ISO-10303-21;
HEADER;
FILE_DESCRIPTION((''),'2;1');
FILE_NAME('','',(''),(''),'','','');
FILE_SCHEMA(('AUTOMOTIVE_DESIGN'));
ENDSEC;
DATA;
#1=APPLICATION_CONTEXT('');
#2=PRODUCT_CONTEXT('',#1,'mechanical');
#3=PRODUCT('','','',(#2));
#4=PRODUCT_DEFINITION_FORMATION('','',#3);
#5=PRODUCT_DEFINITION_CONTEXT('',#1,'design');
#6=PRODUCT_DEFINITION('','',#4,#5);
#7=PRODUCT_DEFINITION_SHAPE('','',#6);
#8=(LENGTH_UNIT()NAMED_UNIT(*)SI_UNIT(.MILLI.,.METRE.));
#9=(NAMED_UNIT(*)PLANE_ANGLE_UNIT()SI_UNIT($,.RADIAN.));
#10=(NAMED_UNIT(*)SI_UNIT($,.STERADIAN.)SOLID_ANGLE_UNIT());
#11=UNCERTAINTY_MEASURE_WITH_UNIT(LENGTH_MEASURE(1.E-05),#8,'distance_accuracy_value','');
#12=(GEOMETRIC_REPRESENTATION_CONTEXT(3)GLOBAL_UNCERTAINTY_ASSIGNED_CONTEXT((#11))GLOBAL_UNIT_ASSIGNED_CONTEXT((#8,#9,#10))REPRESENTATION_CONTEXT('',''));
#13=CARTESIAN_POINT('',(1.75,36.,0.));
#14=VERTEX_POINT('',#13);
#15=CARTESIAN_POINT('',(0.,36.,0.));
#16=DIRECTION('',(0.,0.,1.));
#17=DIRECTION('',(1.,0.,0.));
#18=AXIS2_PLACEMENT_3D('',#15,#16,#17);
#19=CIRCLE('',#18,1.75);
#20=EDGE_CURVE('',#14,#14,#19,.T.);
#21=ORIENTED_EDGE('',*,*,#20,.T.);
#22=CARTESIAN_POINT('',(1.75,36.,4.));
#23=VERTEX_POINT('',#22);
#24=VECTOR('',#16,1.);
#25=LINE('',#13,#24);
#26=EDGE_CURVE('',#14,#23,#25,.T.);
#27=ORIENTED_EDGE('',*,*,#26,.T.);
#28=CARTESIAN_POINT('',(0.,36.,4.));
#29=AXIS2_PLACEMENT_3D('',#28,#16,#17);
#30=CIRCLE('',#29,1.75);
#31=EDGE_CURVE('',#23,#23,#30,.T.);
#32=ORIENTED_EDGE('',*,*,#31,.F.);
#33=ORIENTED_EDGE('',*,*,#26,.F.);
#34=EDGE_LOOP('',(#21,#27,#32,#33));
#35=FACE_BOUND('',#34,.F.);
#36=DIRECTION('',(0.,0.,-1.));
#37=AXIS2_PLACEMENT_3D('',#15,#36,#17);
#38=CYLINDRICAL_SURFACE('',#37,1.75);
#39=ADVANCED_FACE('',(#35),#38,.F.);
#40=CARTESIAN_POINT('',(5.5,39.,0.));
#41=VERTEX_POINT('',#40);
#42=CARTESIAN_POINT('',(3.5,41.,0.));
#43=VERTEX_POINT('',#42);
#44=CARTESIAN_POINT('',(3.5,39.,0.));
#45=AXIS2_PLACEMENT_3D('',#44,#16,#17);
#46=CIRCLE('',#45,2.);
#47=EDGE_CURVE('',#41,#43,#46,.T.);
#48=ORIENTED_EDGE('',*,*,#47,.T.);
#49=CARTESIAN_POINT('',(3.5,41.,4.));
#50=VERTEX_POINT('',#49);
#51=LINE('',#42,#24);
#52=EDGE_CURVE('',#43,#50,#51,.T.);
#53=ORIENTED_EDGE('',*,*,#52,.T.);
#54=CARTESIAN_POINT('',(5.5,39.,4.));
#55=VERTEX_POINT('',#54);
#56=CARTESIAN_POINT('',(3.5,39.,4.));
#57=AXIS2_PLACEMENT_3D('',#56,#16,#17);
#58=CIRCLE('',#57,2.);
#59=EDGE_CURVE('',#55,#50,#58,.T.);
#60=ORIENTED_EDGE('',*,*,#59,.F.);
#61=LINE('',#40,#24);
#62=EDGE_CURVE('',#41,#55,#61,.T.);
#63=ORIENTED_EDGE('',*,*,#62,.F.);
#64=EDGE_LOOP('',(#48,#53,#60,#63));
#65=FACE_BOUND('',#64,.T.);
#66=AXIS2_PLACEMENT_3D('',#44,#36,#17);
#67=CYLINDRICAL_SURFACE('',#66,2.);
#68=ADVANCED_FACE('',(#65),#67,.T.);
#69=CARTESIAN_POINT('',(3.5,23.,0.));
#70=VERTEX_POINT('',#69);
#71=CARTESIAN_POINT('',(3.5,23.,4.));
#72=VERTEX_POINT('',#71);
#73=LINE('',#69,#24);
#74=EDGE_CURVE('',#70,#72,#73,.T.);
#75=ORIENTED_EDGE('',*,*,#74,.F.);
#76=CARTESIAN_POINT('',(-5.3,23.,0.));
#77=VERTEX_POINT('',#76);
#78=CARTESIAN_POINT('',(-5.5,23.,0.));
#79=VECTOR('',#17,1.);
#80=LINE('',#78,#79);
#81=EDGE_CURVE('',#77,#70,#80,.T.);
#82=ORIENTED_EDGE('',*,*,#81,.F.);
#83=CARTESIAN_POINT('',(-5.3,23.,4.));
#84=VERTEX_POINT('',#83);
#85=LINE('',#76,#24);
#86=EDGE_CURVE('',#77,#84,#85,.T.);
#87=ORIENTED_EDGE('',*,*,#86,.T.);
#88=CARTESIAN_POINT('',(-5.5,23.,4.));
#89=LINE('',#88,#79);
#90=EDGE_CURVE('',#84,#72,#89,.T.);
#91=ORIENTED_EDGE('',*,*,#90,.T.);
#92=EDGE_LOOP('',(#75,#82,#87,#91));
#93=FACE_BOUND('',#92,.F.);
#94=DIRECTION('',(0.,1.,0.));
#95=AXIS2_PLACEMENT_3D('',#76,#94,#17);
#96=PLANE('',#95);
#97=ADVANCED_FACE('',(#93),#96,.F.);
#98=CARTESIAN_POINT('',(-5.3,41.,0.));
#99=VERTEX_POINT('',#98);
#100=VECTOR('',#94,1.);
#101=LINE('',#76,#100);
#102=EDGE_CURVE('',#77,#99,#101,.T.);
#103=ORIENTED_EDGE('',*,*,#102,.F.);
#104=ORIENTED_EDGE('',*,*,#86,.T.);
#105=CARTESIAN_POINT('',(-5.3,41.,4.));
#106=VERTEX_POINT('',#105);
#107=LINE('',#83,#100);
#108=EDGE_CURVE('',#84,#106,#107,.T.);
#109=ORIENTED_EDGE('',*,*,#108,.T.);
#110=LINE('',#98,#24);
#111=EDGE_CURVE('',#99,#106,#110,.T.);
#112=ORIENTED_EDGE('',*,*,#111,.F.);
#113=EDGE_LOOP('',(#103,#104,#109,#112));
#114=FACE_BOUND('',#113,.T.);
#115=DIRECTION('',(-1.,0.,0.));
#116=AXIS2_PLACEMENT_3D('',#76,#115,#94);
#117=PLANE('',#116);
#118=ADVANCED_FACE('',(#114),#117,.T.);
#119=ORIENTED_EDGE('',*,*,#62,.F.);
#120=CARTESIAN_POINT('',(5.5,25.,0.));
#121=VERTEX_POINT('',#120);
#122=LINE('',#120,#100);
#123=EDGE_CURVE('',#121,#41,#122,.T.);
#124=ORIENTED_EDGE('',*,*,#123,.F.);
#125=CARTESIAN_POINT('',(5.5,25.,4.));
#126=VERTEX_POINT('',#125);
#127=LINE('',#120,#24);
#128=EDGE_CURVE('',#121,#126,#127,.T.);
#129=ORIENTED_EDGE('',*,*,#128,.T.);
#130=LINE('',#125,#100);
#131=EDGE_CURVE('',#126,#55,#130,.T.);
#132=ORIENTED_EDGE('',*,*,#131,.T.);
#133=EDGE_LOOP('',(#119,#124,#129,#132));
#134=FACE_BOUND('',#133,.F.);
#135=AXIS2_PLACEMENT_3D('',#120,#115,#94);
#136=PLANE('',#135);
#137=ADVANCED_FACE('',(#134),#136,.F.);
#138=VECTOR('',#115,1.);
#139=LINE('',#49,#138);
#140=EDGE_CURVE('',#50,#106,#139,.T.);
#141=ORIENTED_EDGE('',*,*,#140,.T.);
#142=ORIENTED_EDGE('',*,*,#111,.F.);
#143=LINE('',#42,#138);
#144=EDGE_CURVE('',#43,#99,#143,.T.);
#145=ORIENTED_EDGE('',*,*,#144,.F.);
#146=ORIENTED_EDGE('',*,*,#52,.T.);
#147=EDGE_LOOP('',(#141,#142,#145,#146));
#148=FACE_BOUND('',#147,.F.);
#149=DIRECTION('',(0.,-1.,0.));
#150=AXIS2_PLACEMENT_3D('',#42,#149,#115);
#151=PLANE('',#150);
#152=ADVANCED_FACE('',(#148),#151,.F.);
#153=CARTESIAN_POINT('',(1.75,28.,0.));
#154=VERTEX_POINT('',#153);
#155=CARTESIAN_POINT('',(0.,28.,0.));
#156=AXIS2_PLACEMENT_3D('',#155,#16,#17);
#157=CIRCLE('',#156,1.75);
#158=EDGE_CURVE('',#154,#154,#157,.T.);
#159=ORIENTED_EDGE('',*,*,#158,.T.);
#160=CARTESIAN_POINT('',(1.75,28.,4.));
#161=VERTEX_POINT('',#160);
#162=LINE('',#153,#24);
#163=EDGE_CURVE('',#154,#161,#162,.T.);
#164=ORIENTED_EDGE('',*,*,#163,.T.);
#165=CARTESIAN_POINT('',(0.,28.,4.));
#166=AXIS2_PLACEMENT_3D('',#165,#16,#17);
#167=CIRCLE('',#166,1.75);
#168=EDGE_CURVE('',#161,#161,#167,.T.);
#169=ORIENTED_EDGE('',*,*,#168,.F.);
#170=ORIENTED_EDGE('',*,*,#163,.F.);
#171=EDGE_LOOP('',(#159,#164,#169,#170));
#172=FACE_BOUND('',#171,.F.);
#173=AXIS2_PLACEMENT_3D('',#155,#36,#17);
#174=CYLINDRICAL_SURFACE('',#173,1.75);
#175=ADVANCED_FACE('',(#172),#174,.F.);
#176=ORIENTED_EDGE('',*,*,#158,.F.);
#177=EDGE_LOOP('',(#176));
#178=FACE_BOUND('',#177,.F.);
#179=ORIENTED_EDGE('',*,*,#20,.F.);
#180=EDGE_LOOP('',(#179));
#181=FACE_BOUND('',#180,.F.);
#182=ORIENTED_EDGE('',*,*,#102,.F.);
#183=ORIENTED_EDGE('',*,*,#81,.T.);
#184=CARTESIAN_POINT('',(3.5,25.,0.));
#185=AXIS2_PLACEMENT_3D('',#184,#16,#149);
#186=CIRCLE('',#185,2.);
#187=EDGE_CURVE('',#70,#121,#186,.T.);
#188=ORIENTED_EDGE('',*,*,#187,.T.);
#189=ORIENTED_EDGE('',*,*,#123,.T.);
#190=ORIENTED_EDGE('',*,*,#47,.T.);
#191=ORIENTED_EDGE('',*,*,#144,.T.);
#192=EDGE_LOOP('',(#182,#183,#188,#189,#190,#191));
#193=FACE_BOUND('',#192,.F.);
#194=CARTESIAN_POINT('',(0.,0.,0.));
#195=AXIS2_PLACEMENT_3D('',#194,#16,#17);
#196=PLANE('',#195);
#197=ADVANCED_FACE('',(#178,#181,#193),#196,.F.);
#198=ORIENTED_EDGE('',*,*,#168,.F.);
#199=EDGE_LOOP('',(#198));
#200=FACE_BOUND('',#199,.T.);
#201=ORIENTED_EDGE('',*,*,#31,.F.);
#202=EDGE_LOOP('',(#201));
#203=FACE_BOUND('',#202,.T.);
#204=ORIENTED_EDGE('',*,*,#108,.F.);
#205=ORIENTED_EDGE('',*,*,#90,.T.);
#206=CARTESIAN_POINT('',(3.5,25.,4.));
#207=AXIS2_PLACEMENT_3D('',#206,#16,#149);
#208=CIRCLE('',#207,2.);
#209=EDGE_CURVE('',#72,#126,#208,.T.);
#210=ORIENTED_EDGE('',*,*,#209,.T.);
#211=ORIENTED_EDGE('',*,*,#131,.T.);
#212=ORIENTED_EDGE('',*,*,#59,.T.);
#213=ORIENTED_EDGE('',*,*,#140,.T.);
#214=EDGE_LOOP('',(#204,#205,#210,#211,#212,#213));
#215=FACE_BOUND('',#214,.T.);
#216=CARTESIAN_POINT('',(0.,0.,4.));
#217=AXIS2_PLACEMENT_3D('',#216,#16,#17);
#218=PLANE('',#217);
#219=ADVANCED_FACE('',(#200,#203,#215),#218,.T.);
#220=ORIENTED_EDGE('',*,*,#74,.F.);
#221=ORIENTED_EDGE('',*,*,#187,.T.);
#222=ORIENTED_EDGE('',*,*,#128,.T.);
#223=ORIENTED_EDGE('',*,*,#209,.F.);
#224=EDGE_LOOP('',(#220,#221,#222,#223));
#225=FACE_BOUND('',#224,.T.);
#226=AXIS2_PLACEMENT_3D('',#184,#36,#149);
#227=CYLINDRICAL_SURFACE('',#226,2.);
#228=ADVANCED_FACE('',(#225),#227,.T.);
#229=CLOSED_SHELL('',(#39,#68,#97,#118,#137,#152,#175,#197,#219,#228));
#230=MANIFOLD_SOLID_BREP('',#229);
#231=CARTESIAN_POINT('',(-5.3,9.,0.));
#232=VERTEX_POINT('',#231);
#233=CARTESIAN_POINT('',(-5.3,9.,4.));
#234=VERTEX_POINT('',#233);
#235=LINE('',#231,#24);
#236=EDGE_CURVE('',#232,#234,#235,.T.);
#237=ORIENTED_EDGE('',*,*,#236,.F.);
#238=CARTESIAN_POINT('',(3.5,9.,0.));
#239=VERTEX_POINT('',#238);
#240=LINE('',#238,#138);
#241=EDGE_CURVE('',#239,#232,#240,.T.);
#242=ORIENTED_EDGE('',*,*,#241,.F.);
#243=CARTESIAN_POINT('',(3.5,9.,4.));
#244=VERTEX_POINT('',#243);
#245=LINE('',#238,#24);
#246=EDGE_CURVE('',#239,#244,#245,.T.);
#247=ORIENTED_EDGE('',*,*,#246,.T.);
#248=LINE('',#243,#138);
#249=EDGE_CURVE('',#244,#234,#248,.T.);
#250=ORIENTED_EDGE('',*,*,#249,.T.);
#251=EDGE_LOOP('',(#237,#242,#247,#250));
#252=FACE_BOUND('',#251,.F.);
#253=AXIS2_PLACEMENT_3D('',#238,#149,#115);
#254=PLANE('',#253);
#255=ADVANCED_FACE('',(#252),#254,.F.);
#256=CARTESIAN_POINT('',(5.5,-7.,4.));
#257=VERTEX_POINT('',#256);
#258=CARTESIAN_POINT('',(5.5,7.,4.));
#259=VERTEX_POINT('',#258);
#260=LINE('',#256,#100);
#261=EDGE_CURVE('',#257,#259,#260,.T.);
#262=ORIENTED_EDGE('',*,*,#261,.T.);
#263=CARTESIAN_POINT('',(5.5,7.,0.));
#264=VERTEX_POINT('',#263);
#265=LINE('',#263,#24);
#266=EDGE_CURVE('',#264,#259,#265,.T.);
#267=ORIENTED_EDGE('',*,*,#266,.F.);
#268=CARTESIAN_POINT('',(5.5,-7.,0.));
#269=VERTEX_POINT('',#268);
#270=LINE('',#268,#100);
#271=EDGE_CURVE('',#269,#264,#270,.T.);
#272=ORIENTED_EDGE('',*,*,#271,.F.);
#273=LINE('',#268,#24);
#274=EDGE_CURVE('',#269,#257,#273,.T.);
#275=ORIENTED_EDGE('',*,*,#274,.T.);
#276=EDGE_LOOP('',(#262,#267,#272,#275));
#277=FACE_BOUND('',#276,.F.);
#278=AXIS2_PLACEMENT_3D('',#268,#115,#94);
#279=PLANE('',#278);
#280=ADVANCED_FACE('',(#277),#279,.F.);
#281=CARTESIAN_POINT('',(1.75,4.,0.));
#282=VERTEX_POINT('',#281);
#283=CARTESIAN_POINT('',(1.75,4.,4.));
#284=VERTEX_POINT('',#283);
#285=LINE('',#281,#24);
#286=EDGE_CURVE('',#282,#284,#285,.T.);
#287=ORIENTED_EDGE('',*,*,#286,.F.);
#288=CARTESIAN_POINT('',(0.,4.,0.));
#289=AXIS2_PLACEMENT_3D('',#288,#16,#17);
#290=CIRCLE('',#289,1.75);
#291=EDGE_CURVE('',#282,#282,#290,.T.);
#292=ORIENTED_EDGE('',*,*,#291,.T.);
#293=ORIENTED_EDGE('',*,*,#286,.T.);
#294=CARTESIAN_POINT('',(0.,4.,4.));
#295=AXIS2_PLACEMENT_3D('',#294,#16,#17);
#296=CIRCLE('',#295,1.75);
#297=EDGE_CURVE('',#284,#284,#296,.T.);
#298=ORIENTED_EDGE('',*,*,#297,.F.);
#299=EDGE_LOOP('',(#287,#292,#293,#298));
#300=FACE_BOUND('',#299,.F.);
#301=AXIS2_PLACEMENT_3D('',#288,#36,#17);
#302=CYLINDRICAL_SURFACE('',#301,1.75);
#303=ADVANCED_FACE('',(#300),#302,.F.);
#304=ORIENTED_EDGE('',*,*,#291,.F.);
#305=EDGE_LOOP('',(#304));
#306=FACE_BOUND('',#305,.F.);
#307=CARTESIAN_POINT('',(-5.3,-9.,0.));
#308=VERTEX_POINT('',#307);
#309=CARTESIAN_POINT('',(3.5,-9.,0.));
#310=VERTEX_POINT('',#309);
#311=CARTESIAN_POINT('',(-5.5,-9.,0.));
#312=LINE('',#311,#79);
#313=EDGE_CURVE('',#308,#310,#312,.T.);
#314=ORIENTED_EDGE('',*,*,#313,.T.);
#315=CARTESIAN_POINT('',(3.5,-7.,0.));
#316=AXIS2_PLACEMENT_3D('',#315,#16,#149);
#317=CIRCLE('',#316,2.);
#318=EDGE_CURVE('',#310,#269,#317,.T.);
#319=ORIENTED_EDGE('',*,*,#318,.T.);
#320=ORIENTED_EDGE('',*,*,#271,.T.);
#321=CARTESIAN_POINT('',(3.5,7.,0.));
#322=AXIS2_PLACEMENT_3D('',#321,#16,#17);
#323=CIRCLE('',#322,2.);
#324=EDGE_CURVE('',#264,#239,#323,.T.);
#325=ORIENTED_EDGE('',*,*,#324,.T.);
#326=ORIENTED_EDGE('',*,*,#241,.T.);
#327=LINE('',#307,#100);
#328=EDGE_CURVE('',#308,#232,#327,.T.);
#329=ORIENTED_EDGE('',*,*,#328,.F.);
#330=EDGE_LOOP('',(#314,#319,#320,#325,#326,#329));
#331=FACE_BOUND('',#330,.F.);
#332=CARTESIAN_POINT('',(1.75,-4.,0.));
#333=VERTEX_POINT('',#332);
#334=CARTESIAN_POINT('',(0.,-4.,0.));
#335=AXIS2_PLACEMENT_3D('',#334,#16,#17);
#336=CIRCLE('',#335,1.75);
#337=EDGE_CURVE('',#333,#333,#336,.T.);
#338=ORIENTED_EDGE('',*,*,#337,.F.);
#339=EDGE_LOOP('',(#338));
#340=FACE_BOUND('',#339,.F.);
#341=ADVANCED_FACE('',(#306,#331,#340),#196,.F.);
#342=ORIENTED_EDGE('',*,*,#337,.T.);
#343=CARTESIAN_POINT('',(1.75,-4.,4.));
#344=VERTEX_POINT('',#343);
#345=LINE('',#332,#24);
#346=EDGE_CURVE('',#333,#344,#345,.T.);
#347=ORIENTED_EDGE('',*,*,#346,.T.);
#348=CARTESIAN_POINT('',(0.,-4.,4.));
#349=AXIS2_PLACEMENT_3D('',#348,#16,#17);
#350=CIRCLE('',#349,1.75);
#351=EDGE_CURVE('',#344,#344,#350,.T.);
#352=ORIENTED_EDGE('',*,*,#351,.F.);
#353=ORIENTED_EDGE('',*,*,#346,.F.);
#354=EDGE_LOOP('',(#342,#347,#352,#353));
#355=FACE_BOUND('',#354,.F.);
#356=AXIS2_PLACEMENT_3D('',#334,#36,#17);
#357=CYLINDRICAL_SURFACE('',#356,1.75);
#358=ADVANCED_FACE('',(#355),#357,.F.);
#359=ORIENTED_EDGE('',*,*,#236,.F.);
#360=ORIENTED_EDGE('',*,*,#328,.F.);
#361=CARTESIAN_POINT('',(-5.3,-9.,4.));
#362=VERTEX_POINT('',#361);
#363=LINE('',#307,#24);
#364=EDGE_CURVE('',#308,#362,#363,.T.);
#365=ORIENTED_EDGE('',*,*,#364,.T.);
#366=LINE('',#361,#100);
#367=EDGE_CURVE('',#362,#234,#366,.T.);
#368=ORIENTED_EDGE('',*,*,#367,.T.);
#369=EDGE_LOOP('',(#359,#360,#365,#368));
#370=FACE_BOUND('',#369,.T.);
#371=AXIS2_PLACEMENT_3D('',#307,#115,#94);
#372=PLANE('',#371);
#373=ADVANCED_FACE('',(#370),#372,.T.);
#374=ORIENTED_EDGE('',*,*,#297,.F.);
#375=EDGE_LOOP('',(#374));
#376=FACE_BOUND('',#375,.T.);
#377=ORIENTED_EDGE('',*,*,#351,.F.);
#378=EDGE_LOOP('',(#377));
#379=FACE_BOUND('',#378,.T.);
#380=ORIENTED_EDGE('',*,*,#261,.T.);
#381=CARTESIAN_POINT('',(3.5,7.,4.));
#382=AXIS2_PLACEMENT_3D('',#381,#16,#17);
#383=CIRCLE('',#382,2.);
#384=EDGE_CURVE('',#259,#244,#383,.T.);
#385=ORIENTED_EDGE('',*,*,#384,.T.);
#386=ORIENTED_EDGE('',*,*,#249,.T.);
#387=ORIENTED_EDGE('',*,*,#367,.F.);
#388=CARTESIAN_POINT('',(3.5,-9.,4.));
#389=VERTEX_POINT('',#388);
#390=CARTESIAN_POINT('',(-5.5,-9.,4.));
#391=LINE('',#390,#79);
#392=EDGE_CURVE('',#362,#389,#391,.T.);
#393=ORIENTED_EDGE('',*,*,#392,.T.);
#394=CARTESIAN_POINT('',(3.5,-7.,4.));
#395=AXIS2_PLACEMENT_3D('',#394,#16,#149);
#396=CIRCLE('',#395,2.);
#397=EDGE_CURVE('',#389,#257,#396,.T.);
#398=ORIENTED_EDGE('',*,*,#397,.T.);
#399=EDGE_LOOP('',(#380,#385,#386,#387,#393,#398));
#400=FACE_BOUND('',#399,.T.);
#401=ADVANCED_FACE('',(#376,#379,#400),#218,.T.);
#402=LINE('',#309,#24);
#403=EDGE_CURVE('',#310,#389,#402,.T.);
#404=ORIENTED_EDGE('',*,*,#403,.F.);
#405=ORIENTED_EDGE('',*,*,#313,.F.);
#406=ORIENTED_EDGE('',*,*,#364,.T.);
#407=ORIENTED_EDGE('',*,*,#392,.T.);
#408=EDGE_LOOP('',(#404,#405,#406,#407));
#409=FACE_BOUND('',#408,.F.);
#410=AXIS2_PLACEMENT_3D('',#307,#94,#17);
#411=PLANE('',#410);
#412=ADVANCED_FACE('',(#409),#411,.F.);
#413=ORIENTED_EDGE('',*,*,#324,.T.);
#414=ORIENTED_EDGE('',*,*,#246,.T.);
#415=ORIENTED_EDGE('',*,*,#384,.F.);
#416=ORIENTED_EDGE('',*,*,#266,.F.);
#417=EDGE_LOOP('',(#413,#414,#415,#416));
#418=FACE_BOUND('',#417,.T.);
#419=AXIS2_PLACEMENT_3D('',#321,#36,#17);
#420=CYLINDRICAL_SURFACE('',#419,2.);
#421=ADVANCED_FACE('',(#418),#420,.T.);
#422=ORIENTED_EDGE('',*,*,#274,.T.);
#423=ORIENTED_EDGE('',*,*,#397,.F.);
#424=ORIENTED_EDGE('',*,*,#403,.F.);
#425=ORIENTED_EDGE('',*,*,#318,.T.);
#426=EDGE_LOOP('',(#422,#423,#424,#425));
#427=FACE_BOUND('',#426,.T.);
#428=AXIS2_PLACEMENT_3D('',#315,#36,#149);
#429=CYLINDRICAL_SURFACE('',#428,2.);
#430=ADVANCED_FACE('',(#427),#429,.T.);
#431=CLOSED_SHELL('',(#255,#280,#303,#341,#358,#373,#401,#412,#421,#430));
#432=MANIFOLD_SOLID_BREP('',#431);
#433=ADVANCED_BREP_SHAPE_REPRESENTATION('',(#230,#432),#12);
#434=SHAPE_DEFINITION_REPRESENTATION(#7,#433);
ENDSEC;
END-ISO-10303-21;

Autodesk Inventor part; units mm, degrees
ref_plane "YZ Plane" through (0, 0, 0) normal (1, 0, 0) x (0, 1, 0)
ref_plane "XZ Plane" through (0, 0, 0) normal (0, 1, 0) x (-1, 0, 0)
ref_plane "XY Plane" through (0, 0, 0) normal (0, 0, 1) x (1, 0, 0)
sketch "Sketch1" plane through (0, 0, 0) normal (0, 0, 1) x (1, 0, 0)
  arc A0 (5.5, 7) -> (3.5, 9) centre (3.5, 7) ccw projected
  line L0 (3.5, 9) -> (-5.5, 9) projected
  line L1 (-5.5, -9) -> (-5.5, 9) projected
  line L2 (-5.5, -9) -> (3.5, -9) projected
  arc A1 (3.5, -9) -> (5.5, -7) centre (3.5, -7) ccw projected
  line L3 (5.5, -7) -> (5.5, 7) projected
  circle A2 centre (0, 4) radius 2.25 projected
  circle A3 centre (0, -4) radius 2.25 projected
  arc A4 (5.5, 39) -> (3.5, 41) centre (3.5, 39) ccw projected
  line L4 (3.5, 41) -> (-5.5, 41) projected
  line L5 (-5.5, 23) -> (-5.5, 41) projected
  line L6 (-5.5, 23) -> (3.5, 23) projected
  arc A5 (3.5, 23) -> (5.5, 25) centre (3.5, 25) ccw projected
  line L7 (5.5, 25) -> (5.5, 39) projected
  circle A6 centre (0, 36) radius 2.25 projected
  circle A7 centre (0, 28) radius 2.25 projected
  line L8 (-5.3, -9) -> (-5.3, 9)
  line L9 (-5.3, 23) -> (-5.3, 41)
  circle A8 centre (0, -4) radius 1.75
  circle A9 centre (0, 4) radius 1.75
  circle A10 centre (0, 28) radius 1.75
  circle A11 centre (0, 36) radius 1.75
  point P0 (0, 0)
  dimension "d0" = 0.2
  dimension "d1" = 0.2
  dimension "d4" = 3.5
  dimension "d5" = 3.5
  dimension "d6" = 3.5
  dimension "d7" = 3.5
extrude "Extrusion1" add sketch "Sketch1" along normal blind 4 contours L3 A1 L2 L8 L0 A0 | A2 | A3 | L7 A5 L6 L9 L4 A4 | A6 | A7
properties part number "Adapter"
